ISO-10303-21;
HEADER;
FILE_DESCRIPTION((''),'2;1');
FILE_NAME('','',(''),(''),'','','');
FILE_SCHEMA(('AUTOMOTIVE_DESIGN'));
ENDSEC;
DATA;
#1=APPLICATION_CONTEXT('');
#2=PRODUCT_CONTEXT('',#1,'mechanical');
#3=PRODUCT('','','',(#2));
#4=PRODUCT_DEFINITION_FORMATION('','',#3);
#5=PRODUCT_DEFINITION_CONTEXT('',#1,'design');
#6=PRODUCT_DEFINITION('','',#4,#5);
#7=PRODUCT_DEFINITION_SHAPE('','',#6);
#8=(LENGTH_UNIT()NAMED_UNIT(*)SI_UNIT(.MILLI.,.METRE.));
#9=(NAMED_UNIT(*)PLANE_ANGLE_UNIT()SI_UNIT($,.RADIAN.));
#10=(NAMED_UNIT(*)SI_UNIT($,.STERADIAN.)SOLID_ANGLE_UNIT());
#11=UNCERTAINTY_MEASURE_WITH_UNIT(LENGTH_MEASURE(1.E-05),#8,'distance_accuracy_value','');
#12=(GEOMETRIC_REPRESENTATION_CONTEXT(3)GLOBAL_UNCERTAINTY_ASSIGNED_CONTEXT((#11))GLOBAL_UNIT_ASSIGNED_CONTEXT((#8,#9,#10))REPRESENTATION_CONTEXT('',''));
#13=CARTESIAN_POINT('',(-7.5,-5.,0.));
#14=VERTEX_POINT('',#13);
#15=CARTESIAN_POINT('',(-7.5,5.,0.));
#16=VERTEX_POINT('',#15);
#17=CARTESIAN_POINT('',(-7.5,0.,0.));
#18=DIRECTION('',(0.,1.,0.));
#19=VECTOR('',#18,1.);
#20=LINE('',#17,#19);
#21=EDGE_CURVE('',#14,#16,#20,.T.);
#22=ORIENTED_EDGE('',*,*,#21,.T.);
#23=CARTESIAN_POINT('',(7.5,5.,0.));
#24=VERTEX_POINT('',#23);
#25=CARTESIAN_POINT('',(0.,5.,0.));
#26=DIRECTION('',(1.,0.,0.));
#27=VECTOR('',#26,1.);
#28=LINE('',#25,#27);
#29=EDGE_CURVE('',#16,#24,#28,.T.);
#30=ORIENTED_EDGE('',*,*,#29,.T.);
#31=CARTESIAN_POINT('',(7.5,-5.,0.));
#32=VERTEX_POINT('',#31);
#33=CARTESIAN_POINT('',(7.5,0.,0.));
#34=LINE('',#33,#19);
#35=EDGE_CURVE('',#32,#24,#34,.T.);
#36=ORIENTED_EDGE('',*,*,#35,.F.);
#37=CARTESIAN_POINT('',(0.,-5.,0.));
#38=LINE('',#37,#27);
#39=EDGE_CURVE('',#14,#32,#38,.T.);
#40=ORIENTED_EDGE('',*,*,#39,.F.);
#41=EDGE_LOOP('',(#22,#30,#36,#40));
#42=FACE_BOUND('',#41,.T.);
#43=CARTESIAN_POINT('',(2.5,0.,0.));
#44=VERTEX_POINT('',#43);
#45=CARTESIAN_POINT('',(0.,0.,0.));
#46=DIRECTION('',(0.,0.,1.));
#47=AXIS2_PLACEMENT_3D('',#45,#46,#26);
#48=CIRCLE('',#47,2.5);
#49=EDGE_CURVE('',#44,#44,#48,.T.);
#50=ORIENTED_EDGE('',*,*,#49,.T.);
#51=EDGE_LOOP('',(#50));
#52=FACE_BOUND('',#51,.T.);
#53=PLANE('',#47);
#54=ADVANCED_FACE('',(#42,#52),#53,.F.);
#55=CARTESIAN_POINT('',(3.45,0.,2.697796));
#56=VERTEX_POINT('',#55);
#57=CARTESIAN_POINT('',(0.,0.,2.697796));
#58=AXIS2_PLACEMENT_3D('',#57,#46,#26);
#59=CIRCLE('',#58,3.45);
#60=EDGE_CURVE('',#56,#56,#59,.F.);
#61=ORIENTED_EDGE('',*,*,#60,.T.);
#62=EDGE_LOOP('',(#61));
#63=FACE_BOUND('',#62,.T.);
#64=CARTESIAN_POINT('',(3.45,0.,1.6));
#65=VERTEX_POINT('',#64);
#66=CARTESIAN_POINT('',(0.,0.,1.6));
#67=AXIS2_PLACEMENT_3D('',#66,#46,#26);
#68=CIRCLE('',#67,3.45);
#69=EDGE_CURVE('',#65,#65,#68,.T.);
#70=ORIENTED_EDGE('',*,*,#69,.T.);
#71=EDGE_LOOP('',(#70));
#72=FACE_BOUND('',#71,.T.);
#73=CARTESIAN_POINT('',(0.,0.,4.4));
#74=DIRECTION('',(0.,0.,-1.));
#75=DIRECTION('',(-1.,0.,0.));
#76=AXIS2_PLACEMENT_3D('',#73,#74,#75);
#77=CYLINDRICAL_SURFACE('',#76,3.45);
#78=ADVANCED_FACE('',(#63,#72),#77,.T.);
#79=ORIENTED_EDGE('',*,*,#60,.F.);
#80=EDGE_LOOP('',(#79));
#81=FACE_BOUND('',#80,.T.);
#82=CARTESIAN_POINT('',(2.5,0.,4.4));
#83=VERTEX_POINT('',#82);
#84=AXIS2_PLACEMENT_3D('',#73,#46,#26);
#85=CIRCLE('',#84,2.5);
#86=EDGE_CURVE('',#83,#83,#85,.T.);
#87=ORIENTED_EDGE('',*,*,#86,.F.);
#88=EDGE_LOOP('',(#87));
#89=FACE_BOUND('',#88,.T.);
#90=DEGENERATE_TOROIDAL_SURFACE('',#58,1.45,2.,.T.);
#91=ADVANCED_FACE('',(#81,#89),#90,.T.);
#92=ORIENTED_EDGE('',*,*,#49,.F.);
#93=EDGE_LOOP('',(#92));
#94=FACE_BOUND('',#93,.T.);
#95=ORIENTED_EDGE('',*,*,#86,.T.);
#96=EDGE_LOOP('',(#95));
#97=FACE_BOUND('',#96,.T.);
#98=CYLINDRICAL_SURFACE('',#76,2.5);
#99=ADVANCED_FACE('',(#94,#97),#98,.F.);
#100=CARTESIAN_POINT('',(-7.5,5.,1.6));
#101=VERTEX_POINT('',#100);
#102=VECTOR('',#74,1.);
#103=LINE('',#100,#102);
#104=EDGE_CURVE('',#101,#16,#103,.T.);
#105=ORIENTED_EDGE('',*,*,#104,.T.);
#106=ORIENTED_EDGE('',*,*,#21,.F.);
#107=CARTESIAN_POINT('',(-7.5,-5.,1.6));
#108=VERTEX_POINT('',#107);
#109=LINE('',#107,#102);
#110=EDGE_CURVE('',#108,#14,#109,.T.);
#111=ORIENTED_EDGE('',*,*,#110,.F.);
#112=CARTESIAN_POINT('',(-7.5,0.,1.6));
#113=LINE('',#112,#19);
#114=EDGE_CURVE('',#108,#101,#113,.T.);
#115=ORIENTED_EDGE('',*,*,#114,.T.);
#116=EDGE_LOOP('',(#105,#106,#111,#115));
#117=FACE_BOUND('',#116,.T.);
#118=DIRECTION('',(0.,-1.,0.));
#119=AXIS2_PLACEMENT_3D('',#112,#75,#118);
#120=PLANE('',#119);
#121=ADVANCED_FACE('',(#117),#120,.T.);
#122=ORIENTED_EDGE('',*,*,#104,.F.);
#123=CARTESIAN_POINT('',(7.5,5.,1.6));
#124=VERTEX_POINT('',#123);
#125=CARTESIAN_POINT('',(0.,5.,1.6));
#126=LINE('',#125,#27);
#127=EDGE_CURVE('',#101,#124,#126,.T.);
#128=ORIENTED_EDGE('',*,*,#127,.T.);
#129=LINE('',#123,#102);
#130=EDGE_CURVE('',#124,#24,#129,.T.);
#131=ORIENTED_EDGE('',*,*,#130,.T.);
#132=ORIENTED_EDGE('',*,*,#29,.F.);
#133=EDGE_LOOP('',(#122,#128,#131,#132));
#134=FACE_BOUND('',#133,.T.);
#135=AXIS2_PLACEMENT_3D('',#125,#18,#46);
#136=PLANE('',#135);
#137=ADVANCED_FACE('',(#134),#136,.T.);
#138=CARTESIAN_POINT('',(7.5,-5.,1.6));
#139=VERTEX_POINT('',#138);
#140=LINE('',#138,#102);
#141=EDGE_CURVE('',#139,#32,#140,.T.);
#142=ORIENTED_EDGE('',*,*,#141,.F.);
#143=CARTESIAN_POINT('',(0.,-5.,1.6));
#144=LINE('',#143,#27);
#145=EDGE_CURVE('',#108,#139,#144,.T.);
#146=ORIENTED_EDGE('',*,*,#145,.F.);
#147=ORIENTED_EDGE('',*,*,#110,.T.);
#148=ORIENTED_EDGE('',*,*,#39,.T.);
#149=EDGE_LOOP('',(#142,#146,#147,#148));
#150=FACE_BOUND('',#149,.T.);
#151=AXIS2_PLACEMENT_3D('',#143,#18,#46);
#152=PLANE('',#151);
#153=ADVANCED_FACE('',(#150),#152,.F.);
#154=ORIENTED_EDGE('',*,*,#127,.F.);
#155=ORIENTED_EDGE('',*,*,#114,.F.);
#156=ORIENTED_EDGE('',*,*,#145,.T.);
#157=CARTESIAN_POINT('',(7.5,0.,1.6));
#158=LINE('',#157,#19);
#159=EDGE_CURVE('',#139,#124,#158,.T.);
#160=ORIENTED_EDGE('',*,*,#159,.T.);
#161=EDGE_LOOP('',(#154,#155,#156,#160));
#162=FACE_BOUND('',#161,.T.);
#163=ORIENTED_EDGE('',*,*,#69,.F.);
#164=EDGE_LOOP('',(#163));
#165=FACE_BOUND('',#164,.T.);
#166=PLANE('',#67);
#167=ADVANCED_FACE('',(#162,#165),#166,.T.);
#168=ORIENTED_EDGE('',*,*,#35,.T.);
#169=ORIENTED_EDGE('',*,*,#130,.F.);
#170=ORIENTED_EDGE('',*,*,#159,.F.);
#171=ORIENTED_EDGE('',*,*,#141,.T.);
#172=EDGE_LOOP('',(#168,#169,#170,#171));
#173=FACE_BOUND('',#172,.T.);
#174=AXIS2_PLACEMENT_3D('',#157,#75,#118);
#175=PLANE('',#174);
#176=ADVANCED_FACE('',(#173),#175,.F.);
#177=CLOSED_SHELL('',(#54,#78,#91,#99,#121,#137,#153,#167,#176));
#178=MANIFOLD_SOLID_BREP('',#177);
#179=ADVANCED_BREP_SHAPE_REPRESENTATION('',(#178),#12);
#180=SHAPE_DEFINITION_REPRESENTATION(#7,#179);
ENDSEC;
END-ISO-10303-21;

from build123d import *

# Parameters (mm, degrees)
SKETCH1_R           = 3.45
SKETCH1_R_2         = 2.5
BOSS_EXTRUDE1_DEPTH = 4.4
SKETCH1_3_W         = 15
SKETCH1_3_H         = 10
SKETCH1_3_R         = 3.45
BOSS_EXTRUDE2_DEPTH = 1.6
FILLET1_R           = 2


with BuildPart() as part:
    # Sketch1 → Boss-Extrude1 (new body)
    with BuildSketch(Plane.XY):
        Circle(SKETCH1_R)
        Circle(SKETCH1_R_2, mode=Mode.SUBTRACT)
    extrude(amount=BOSS_EXTRUDE1_DEPTH)

    # Sketch1<3> → Boss-Extrude2 (add)
    with BuildSketch(Plane.XY):
        Rectangle(SKETCH1_3_W, SKETCH1_3_H)
        Circle(SKETCH1_3_R, mode=Mode.SUBTRACT)
    extrude(amount=BOSS_EXTRUDE2_DEPTH)

    # Fillet1
    # the kernel refuses this fillet: 2 mm, written as the material it takes off along each edge
    with BuildSketch(Plane(origin=(0, 0, 4.4), x_dir=(1, 0, 0), z_dir=(0, -1, 0))) as fillet1_piece_1:
        with BuildLine():
            CenterArc((1.45, -1.702204453), FILLET1_R, 0, 58.331756746)
            Line((2.5, 0), (2.521, 0.034044089))
            ThreePointArc((2.521, 0.034044089), (2.975, 0.04), (3.45, 0.04))
            Line((3.45, 0.04), (3.49, 0))
            Line((3.49, 0), (3.49, -1.702204453))
            Line((3.49, -1.702204453), (3.45, -1.702204453))
        make_face()
    revolve(axis=Axis((0, 0, 4.4), (0, 0, 1)), mode=Mode.SUBTRACT)


solid = part.part
